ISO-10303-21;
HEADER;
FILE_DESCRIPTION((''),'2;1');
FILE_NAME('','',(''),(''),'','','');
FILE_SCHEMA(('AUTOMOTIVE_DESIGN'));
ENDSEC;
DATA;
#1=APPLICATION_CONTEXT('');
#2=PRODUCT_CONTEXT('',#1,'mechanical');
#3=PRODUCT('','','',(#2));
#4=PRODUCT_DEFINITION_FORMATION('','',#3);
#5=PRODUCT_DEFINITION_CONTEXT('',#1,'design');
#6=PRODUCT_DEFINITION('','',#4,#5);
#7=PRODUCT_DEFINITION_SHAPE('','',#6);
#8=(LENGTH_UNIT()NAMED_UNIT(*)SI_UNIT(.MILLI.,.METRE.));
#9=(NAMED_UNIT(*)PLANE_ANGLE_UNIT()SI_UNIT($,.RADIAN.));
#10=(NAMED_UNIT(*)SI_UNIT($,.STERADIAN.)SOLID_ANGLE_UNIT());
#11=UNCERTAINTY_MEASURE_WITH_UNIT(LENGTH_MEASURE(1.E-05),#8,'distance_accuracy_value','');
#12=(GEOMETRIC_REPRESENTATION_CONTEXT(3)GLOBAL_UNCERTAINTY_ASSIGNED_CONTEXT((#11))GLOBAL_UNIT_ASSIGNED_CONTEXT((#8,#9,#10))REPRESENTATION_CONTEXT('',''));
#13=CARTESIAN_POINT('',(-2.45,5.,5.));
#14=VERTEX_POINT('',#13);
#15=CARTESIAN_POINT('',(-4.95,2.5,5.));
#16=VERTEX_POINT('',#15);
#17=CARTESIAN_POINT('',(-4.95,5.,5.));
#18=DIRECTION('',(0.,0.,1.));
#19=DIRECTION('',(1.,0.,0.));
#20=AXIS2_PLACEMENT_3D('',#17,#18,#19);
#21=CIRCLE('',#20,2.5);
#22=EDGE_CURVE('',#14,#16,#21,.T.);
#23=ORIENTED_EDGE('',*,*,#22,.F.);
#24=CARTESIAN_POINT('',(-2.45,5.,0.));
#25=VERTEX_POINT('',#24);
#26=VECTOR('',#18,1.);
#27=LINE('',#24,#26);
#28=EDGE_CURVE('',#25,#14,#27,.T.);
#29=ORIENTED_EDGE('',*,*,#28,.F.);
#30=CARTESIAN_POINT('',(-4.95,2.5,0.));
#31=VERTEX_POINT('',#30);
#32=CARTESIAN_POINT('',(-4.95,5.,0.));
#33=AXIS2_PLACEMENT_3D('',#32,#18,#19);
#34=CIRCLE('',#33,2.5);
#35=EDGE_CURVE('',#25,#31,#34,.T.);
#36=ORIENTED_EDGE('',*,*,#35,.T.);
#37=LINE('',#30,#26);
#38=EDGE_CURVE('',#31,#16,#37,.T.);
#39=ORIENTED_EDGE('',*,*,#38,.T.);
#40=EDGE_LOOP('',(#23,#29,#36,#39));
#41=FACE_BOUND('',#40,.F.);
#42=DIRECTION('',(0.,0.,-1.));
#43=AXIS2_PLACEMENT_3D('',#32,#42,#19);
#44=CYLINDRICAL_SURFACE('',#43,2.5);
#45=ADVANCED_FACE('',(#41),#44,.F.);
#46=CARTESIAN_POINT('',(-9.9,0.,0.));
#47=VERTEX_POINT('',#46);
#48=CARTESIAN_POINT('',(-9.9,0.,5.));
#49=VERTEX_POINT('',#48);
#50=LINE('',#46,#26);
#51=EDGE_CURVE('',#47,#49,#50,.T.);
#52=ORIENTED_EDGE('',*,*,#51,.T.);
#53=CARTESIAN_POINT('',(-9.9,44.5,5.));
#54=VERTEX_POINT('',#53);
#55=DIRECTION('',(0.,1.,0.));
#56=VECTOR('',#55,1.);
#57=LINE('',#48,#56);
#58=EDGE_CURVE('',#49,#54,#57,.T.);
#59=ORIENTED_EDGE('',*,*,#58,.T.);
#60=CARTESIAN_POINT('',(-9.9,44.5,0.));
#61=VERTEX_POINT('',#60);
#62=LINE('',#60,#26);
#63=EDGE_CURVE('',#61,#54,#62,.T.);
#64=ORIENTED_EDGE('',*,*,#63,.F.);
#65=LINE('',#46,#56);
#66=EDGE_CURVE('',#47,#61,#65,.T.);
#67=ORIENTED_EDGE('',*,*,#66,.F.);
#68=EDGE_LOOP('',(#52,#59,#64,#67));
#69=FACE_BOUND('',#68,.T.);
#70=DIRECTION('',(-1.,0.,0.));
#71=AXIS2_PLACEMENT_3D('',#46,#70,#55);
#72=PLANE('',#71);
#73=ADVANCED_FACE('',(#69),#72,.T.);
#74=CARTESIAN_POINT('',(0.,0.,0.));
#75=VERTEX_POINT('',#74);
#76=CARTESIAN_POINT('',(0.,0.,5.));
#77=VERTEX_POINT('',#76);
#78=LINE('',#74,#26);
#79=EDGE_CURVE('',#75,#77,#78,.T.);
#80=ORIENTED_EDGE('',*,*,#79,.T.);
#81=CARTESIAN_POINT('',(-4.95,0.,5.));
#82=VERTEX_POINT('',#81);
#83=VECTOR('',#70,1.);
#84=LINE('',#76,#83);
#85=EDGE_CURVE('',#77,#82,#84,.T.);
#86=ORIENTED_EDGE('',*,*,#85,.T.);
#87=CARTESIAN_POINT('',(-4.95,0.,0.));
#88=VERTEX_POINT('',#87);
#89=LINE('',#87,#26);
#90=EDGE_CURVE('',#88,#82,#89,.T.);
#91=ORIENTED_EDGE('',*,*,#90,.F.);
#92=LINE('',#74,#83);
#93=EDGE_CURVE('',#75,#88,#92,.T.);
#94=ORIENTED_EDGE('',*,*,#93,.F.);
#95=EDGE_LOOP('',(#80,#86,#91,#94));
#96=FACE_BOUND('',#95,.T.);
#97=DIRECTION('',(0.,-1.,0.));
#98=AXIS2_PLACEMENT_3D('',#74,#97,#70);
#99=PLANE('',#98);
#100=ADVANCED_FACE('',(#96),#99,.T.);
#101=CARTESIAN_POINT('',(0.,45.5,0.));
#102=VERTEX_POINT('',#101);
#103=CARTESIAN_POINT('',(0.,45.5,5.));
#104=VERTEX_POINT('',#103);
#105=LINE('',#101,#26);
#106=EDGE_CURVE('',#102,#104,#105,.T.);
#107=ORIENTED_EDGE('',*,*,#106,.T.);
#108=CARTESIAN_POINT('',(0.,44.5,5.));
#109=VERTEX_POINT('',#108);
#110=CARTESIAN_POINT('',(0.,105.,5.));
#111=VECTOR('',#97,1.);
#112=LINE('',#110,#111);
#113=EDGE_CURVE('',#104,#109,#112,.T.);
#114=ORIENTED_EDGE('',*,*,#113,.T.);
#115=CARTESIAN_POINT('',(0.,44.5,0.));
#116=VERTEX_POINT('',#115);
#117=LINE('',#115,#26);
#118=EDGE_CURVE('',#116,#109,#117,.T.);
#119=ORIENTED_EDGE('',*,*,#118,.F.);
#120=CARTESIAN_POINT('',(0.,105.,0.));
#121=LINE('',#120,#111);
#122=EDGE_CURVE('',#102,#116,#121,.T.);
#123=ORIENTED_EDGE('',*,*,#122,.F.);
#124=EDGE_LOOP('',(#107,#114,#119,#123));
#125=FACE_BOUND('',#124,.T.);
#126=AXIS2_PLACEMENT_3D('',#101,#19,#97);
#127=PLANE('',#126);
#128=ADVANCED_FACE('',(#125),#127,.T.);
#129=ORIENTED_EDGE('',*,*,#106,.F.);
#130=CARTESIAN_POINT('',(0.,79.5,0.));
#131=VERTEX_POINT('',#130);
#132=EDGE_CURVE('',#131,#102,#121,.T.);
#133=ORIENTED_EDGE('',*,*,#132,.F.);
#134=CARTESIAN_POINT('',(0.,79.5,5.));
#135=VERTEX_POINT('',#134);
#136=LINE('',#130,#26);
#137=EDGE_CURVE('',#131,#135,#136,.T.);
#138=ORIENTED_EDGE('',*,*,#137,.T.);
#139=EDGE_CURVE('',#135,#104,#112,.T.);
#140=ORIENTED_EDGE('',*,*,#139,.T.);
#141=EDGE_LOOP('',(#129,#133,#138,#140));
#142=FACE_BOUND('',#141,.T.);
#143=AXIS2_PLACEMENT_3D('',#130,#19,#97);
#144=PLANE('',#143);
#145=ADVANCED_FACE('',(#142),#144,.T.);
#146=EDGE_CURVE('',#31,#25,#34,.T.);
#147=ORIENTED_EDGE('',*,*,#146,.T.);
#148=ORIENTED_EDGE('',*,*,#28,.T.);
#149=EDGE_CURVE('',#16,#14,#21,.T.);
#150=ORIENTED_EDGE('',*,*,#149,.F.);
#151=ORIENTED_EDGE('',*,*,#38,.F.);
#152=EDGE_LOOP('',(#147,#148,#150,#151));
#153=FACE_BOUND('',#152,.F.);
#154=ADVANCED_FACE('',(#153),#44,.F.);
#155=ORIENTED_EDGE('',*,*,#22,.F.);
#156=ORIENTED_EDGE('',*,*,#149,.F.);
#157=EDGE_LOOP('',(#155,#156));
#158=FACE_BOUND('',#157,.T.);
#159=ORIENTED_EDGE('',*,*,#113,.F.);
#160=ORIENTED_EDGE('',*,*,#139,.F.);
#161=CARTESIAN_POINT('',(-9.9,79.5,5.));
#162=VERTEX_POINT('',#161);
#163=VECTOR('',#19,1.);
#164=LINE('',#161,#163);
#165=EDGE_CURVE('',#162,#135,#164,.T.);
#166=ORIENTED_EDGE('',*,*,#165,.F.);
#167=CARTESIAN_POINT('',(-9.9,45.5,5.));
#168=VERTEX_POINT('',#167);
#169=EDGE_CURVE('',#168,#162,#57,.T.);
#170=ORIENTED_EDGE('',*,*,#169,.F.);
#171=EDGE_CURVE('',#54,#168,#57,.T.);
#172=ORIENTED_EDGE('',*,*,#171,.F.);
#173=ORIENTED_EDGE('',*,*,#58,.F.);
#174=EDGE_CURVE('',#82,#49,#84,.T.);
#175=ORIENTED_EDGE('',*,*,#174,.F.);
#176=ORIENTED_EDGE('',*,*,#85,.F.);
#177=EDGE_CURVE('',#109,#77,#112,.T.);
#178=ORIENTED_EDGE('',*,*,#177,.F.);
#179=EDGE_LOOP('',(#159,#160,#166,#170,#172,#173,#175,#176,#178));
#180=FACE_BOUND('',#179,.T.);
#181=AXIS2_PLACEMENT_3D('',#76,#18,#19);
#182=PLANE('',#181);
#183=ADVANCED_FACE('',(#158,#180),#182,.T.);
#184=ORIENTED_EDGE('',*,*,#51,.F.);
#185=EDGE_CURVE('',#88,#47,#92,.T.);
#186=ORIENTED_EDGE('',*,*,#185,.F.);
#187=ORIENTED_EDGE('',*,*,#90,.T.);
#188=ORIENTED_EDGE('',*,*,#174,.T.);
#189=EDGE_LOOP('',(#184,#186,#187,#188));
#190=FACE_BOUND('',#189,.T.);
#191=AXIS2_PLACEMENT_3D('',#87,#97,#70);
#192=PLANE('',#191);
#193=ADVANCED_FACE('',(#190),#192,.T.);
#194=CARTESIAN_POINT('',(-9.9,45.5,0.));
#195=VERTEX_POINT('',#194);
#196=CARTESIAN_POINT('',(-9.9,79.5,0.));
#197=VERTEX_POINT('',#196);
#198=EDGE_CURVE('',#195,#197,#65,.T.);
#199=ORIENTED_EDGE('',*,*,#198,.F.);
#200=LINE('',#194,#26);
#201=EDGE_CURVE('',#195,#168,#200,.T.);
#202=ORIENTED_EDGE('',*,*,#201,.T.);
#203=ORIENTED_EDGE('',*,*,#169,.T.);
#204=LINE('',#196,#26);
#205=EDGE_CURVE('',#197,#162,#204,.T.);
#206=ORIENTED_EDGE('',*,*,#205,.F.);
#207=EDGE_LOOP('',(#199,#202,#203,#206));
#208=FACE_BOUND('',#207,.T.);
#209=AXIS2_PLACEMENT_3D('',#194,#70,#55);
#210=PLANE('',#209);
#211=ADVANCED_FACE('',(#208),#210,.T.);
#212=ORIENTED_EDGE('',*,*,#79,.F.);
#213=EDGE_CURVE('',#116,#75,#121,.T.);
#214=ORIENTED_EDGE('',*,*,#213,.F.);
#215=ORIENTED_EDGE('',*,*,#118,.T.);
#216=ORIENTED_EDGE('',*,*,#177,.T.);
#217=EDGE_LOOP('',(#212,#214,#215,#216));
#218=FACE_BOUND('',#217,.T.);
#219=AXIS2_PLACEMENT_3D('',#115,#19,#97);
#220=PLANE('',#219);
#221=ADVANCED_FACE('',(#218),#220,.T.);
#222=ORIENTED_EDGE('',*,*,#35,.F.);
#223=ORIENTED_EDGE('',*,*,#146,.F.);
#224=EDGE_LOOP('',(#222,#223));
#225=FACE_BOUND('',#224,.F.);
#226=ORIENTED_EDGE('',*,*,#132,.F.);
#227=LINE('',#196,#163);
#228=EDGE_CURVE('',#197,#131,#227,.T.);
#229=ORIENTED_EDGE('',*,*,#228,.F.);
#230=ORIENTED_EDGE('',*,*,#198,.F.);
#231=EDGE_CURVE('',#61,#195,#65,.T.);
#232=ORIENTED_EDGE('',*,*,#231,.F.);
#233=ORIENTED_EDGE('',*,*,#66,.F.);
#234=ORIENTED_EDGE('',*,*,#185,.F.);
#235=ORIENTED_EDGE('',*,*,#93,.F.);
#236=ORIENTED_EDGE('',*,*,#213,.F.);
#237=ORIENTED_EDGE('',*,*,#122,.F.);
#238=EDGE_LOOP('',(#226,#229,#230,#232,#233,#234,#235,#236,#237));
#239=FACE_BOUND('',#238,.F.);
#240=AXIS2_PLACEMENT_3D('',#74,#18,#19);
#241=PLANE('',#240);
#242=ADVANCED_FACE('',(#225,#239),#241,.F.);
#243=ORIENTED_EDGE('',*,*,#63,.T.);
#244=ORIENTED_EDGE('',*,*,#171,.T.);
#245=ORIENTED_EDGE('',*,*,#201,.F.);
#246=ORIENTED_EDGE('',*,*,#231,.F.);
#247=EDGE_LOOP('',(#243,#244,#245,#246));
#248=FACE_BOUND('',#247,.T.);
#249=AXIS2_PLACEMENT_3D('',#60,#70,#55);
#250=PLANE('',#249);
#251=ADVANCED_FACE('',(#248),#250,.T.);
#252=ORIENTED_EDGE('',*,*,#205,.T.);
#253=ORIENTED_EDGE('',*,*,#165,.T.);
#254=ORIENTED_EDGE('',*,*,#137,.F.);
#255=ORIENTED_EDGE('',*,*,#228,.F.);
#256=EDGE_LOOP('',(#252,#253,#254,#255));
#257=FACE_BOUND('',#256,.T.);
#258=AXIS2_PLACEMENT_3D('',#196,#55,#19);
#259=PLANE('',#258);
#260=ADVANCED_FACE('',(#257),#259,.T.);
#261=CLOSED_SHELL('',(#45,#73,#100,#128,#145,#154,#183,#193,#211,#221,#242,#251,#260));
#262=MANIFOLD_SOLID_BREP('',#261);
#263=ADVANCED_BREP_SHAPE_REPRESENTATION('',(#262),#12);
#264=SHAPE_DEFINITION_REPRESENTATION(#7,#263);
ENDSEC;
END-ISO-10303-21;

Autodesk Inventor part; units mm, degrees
ref_plane "YZ Plane" through (0, 0, 0) normal (1, 0, 0) x (0, 1, 0)
ref_plane "XZ Plane" through (0, 0, 0) normal (0, 1, 0) x (-1, 0, 0)
ref_plane "XY Plane" through (0, 0, 0) normal (0, 0, 1) x (1, 0, 0)
sketch "Sketch2" plane through (0, 0, 0) normal (0, 0, 1) x (1, 0, 0)
  line L0 (0, 0) -> (-9.9, 0)
  line L1 (-9.9, 0) -> (-9.9, 105)
  line L2 (-9.9, 105) -> (0, 105)
  line L3 (0, 105) -> (0, 0)
  line L4 (-4.95, 0) -> (-4.95, 2.5)
  line L5 (-4.95, 0) -> (-2.45, 0) construction
  circle A0 centre (-4.95, 5) radius 2.5
  line L6 (-4.95, 7.5) -> (32.05, 7.5) construction
  line L7 (0, 44.5) -> (0, 0)
  line L8 (0, 0) -> (-9.9, 0)
  line L9 (-9.9, 0) -> (-9.9, 44.5)
  line L10 (0, 45.5) -> (0, 0)
  line L11 (0, 0) -> (-9.9, 0)
  line L12 (-9.9, 0) -> (-9.9, 45.5)
  line L13 (-4.95, 7.5) -> (66.05, 7.5) construction
  line L14 (-4.95, 7.5) -> (67.05, 7.5) construction
  line L15 (-9.9, 79.5) -> (0, 79.5)
  dimension "d35" = 5
  dimension "d4" = 9.9
  dimension "d5" = 105
  dimension "d33" = 2.5
  dimension "d34" = 90
extrude "Extrusion6" add sketch "Sketch2" along normal blind 5 contours L0 L1 L15 L3
properties part number "Cube_Holder_SB_V1_(71mm)"
